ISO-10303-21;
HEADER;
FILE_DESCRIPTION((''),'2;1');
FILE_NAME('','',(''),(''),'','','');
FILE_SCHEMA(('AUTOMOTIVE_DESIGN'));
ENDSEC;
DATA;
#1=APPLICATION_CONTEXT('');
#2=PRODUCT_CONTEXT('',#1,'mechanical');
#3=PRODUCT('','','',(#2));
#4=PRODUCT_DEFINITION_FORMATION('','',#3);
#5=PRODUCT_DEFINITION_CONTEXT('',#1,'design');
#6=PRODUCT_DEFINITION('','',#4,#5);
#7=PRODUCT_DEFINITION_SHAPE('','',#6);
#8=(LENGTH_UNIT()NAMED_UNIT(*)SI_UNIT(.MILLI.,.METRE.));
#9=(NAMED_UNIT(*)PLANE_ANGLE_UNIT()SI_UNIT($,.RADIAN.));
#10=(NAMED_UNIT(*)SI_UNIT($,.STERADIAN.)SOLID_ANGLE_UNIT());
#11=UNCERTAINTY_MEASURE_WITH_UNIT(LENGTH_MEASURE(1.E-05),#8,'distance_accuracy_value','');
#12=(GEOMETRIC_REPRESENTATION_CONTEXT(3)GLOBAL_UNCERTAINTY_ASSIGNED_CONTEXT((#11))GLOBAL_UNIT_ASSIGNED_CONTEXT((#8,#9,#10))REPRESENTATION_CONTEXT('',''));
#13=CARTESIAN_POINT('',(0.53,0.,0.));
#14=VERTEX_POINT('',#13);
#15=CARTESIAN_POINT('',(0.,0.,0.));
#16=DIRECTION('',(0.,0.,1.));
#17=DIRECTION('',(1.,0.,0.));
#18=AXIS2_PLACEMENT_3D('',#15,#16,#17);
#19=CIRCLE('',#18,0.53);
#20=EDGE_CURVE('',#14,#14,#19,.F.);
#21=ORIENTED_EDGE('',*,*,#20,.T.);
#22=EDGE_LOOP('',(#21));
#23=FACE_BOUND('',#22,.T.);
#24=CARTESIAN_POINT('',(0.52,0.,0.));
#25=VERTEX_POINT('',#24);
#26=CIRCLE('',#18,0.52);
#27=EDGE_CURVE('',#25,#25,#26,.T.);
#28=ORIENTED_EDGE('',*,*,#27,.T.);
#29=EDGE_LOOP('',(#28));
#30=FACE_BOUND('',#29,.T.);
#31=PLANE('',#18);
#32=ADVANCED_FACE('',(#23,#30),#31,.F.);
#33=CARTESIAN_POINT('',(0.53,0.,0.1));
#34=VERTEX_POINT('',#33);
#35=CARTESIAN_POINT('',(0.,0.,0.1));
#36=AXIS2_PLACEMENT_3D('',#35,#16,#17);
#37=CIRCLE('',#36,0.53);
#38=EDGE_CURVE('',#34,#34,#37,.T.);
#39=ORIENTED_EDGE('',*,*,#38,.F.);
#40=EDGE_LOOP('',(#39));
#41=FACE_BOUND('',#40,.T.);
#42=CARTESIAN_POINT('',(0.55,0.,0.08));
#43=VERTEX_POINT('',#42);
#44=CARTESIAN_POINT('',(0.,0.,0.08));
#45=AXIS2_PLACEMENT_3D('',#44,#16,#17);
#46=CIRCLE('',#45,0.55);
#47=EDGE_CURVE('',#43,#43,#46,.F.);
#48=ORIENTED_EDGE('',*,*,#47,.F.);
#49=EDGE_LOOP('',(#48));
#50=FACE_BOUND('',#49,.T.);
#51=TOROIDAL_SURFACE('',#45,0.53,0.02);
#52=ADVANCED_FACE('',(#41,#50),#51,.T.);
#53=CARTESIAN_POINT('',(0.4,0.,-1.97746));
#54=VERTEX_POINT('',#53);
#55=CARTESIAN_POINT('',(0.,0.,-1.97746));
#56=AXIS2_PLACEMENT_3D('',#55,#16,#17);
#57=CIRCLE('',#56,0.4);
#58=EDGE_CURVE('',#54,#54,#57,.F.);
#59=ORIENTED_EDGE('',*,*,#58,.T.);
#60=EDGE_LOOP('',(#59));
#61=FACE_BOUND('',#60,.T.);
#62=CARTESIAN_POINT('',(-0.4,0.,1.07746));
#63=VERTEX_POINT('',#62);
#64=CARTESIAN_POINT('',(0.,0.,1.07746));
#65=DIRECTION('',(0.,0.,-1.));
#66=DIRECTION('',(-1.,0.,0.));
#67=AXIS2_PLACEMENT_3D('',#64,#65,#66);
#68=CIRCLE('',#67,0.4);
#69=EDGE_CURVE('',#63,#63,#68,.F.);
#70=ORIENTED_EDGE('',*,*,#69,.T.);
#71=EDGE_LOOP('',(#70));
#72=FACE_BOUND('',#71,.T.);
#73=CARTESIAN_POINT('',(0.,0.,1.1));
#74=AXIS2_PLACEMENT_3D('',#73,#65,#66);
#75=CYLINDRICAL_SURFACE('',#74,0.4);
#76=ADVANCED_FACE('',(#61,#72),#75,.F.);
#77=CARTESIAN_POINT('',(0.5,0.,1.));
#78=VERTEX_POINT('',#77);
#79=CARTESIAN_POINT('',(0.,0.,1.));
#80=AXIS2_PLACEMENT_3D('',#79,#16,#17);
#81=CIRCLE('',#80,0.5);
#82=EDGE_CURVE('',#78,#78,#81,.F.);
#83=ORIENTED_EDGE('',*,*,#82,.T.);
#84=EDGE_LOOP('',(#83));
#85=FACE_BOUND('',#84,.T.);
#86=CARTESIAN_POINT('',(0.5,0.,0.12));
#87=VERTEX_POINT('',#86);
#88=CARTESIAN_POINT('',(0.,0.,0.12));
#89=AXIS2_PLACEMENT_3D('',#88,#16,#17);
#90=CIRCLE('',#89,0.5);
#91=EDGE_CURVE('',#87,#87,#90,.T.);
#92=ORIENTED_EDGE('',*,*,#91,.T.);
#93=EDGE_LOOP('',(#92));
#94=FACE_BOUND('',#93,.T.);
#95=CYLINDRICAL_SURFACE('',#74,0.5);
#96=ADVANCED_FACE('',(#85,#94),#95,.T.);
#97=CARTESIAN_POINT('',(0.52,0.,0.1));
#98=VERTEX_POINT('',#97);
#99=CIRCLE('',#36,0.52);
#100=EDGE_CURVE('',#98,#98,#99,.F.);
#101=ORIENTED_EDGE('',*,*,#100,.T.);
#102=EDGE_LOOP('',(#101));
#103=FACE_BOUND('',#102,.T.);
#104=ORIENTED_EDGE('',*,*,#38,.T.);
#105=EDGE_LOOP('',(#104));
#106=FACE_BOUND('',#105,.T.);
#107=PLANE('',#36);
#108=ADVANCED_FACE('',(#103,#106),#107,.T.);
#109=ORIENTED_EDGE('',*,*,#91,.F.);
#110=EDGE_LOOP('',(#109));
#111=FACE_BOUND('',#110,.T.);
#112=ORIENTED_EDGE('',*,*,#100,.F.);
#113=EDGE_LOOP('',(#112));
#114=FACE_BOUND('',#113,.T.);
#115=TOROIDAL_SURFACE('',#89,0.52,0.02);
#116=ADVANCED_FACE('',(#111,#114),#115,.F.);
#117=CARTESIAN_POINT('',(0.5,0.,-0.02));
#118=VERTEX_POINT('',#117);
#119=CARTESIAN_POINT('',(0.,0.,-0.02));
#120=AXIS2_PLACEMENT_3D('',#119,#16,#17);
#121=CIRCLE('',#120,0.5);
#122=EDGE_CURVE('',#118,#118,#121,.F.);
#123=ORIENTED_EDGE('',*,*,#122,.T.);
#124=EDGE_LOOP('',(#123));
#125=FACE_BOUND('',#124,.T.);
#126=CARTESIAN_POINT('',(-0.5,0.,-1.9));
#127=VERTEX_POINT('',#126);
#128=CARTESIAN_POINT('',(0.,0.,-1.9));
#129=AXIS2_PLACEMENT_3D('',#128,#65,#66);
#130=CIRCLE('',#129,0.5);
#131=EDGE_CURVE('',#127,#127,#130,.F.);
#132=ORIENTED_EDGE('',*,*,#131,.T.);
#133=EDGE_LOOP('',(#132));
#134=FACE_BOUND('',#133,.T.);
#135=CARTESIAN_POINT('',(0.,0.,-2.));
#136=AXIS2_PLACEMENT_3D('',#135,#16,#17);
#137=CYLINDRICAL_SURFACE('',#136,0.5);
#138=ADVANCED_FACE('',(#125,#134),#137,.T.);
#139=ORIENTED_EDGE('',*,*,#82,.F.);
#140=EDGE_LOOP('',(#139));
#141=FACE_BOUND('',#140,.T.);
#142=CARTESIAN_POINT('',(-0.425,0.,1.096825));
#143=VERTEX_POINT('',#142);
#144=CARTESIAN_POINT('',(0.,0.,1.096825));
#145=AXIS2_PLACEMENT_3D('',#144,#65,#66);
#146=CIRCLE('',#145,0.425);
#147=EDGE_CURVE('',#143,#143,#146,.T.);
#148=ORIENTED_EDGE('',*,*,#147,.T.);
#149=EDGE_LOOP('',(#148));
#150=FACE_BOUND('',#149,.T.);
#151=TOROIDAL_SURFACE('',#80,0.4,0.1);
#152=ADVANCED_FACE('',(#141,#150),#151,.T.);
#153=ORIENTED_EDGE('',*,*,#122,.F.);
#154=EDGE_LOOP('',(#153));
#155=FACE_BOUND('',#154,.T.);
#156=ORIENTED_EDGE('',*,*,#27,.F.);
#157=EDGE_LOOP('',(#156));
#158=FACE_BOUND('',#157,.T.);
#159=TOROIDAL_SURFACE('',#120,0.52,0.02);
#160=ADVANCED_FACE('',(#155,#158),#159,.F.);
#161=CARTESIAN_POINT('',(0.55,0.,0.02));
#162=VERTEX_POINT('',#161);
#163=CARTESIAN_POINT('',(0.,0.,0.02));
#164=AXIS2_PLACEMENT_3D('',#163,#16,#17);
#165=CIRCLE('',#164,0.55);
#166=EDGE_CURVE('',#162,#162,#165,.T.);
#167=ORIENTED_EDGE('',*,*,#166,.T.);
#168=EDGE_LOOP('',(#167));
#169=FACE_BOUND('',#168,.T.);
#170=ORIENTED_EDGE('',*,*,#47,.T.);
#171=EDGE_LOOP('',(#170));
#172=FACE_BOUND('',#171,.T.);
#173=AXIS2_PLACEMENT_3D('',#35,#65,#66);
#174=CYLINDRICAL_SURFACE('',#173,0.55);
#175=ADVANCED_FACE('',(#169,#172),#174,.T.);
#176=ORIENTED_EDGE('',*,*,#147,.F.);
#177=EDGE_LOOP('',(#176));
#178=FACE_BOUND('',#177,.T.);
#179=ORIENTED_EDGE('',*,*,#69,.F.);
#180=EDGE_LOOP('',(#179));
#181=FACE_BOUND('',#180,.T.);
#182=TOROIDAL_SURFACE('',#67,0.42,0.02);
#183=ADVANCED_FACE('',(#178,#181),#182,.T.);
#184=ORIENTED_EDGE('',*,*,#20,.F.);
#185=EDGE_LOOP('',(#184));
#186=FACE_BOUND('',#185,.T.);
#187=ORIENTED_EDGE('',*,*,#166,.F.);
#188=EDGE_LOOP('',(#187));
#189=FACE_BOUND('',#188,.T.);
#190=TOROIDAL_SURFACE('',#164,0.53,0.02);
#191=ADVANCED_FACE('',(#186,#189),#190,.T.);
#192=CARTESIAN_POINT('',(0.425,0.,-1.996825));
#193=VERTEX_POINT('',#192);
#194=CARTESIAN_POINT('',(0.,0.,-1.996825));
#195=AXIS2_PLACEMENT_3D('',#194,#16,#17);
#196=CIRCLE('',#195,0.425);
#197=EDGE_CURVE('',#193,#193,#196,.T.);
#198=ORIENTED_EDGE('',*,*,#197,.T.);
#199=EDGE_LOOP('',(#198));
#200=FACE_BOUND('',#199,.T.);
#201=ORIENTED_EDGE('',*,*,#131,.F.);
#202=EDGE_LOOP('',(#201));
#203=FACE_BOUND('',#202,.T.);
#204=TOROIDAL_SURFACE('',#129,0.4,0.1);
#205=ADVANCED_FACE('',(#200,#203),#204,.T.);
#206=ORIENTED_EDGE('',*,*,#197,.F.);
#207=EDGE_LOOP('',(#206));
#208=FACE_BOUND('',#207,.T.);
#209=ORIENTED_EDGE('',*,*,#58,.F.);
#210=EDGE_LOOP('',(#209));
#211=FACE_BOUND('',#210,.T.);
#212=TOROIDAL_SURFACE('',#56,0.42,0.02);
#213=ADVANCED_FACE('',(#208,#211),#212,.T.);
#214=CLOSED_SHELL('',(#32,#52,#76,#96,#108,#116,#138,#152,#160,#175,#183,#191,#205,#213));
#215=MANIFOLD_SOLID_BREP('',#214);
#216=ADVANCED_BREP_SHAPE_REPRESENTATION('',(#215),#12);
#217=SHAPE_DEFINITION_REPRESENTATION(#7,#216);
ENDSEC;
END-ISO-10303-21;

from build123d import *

# Parameters (mm, degrees)
SKETCH1_R           = 0.55
BOSS_EXTRUDE1_DEPTH = 0.1
SKETCH2_R           = 0.5
BOSS_EXTRUDE2_DEPTH = 1
BOSS_EXTRUDE3_START = 2
SKETCH3_R           = 0.5
BOSS_EXTRUDE3_DEPTH = 2
SKETCH4_R           = 0.4
CUT_EXTRUDE1_DEPTH  = 3.1
FILLET1_R           = 0.1
FILLET2_R           = 0.1
FILLET3_R           = 0.02
FILLET4_R           = 0.02
FILLET5_R           = 0.02
FILLET6_R           = 0.02
FILLET7_R           = 0.02
FILLET8_R           = 0.02


with BuildPart() as part:
    # Sketch1 → Boss-Extrude1 (new body)
    with BuildSketch(Plane.XY):
        Circle(SKETCH1_R)
    extrude(amount=BOSS_EXTRUDE1_DEPTH)

    # Sketch2 → Boss-Extrude2 (add)
    with BuildSketch(Plane.XY.offset(0.1)):
        Circle(SKETCH2_R)
    extrude(amount=BOSS_EXTRUDE2_DEPTH)

    # Sketch3 → Boss-Extrude3 (add)
    with BuildSketch(Plane(origin=(0, 0, 0), x_dir=(-1, 0, 0), z_dir=(0, 0, -1)).offset(BOSS_EXTRUDE3_START)):
        with Locations(Location((0, 0, 0), (0, 0, 180))):
            Circle(SKETCH3_R)
    extrude(amount=-BOSS_EXTRUDE3_DEPTH)

    # Sketch4 → Cut-Extrude1 (cut)
    with BuildSketch(Plane(origin=(0, 0, -2), x_dir=(-1, 0, 0), z_dir=(0, 0, -1))):
        Circle(SKETCH4_R)
    extrude(amount=-CUT_EXTRUDE1_DEPTH, mode=Mode.SUBTRACT)

    # Fillet1
    fillet1_edges = [part.edges().sort_by_distance(p)[0] for p in [
        (-0.5, 0, -2),
    ]]
    fillet(fillet1_edges, radius=FILLET1_R - 0.0001)  # a hair under: the kernel refuses the full size

    # Fillet2
    fillet2_edges = [part.edges().sort_by_distance(p)[0] for p in [
        (-0.5, 0, 1.1),
    ]]
    fillet(fillet2_edges, radius=FILLET2_R - 0.0001)  # a hair under: the kernel refuses the full size

    # Fillet3
    fillet3_edges = [part.edges().sort_by_distance(p)[0] for p in [
        (-0.55, 0, 0.1),
    ]]
    fillet(fillet3_edges, radius=FILLET3_R)

    # Fillet4
    fillet4_edges = [part.edges().sort_by_distance(p)[0] for p in [
        (-0.55, 0, 0),
    ]]
    fillet(fillet4_edges, radius=FILLET4_R)

    # Fillet5
    fillet5_edges = [part.edges().sort_by_distance(p)[0] for p in [
        (-0.5, 0, 0),
    ]]
    fillet(fillet5_edges, radius=FILLET5_R)

    # Fillet6
    fillet6_edges = [part.edges().sort_by_distance(p)[0] for p in [
        (-0.5, 0, 0.1),
    ]]
    fillet(fillet6_edges, radius=FILLET6_R)

    # Fillet7
    fillet7_edges = [part.edges().sort_by_distance(p)[0] for p in [
        (0.4, 0, -2),
    ]]
    fillet(fillet7_edges, radius=FILLET7_R)

    # Fillet8
    fillet8_edges = [part.edges().sort_by_distance(p)[0] for p in [
        (0.4, 0, 1.1),
    ]]
    fillet(fillet8_edges, radius=FILLET8_R)


solid = part.part
